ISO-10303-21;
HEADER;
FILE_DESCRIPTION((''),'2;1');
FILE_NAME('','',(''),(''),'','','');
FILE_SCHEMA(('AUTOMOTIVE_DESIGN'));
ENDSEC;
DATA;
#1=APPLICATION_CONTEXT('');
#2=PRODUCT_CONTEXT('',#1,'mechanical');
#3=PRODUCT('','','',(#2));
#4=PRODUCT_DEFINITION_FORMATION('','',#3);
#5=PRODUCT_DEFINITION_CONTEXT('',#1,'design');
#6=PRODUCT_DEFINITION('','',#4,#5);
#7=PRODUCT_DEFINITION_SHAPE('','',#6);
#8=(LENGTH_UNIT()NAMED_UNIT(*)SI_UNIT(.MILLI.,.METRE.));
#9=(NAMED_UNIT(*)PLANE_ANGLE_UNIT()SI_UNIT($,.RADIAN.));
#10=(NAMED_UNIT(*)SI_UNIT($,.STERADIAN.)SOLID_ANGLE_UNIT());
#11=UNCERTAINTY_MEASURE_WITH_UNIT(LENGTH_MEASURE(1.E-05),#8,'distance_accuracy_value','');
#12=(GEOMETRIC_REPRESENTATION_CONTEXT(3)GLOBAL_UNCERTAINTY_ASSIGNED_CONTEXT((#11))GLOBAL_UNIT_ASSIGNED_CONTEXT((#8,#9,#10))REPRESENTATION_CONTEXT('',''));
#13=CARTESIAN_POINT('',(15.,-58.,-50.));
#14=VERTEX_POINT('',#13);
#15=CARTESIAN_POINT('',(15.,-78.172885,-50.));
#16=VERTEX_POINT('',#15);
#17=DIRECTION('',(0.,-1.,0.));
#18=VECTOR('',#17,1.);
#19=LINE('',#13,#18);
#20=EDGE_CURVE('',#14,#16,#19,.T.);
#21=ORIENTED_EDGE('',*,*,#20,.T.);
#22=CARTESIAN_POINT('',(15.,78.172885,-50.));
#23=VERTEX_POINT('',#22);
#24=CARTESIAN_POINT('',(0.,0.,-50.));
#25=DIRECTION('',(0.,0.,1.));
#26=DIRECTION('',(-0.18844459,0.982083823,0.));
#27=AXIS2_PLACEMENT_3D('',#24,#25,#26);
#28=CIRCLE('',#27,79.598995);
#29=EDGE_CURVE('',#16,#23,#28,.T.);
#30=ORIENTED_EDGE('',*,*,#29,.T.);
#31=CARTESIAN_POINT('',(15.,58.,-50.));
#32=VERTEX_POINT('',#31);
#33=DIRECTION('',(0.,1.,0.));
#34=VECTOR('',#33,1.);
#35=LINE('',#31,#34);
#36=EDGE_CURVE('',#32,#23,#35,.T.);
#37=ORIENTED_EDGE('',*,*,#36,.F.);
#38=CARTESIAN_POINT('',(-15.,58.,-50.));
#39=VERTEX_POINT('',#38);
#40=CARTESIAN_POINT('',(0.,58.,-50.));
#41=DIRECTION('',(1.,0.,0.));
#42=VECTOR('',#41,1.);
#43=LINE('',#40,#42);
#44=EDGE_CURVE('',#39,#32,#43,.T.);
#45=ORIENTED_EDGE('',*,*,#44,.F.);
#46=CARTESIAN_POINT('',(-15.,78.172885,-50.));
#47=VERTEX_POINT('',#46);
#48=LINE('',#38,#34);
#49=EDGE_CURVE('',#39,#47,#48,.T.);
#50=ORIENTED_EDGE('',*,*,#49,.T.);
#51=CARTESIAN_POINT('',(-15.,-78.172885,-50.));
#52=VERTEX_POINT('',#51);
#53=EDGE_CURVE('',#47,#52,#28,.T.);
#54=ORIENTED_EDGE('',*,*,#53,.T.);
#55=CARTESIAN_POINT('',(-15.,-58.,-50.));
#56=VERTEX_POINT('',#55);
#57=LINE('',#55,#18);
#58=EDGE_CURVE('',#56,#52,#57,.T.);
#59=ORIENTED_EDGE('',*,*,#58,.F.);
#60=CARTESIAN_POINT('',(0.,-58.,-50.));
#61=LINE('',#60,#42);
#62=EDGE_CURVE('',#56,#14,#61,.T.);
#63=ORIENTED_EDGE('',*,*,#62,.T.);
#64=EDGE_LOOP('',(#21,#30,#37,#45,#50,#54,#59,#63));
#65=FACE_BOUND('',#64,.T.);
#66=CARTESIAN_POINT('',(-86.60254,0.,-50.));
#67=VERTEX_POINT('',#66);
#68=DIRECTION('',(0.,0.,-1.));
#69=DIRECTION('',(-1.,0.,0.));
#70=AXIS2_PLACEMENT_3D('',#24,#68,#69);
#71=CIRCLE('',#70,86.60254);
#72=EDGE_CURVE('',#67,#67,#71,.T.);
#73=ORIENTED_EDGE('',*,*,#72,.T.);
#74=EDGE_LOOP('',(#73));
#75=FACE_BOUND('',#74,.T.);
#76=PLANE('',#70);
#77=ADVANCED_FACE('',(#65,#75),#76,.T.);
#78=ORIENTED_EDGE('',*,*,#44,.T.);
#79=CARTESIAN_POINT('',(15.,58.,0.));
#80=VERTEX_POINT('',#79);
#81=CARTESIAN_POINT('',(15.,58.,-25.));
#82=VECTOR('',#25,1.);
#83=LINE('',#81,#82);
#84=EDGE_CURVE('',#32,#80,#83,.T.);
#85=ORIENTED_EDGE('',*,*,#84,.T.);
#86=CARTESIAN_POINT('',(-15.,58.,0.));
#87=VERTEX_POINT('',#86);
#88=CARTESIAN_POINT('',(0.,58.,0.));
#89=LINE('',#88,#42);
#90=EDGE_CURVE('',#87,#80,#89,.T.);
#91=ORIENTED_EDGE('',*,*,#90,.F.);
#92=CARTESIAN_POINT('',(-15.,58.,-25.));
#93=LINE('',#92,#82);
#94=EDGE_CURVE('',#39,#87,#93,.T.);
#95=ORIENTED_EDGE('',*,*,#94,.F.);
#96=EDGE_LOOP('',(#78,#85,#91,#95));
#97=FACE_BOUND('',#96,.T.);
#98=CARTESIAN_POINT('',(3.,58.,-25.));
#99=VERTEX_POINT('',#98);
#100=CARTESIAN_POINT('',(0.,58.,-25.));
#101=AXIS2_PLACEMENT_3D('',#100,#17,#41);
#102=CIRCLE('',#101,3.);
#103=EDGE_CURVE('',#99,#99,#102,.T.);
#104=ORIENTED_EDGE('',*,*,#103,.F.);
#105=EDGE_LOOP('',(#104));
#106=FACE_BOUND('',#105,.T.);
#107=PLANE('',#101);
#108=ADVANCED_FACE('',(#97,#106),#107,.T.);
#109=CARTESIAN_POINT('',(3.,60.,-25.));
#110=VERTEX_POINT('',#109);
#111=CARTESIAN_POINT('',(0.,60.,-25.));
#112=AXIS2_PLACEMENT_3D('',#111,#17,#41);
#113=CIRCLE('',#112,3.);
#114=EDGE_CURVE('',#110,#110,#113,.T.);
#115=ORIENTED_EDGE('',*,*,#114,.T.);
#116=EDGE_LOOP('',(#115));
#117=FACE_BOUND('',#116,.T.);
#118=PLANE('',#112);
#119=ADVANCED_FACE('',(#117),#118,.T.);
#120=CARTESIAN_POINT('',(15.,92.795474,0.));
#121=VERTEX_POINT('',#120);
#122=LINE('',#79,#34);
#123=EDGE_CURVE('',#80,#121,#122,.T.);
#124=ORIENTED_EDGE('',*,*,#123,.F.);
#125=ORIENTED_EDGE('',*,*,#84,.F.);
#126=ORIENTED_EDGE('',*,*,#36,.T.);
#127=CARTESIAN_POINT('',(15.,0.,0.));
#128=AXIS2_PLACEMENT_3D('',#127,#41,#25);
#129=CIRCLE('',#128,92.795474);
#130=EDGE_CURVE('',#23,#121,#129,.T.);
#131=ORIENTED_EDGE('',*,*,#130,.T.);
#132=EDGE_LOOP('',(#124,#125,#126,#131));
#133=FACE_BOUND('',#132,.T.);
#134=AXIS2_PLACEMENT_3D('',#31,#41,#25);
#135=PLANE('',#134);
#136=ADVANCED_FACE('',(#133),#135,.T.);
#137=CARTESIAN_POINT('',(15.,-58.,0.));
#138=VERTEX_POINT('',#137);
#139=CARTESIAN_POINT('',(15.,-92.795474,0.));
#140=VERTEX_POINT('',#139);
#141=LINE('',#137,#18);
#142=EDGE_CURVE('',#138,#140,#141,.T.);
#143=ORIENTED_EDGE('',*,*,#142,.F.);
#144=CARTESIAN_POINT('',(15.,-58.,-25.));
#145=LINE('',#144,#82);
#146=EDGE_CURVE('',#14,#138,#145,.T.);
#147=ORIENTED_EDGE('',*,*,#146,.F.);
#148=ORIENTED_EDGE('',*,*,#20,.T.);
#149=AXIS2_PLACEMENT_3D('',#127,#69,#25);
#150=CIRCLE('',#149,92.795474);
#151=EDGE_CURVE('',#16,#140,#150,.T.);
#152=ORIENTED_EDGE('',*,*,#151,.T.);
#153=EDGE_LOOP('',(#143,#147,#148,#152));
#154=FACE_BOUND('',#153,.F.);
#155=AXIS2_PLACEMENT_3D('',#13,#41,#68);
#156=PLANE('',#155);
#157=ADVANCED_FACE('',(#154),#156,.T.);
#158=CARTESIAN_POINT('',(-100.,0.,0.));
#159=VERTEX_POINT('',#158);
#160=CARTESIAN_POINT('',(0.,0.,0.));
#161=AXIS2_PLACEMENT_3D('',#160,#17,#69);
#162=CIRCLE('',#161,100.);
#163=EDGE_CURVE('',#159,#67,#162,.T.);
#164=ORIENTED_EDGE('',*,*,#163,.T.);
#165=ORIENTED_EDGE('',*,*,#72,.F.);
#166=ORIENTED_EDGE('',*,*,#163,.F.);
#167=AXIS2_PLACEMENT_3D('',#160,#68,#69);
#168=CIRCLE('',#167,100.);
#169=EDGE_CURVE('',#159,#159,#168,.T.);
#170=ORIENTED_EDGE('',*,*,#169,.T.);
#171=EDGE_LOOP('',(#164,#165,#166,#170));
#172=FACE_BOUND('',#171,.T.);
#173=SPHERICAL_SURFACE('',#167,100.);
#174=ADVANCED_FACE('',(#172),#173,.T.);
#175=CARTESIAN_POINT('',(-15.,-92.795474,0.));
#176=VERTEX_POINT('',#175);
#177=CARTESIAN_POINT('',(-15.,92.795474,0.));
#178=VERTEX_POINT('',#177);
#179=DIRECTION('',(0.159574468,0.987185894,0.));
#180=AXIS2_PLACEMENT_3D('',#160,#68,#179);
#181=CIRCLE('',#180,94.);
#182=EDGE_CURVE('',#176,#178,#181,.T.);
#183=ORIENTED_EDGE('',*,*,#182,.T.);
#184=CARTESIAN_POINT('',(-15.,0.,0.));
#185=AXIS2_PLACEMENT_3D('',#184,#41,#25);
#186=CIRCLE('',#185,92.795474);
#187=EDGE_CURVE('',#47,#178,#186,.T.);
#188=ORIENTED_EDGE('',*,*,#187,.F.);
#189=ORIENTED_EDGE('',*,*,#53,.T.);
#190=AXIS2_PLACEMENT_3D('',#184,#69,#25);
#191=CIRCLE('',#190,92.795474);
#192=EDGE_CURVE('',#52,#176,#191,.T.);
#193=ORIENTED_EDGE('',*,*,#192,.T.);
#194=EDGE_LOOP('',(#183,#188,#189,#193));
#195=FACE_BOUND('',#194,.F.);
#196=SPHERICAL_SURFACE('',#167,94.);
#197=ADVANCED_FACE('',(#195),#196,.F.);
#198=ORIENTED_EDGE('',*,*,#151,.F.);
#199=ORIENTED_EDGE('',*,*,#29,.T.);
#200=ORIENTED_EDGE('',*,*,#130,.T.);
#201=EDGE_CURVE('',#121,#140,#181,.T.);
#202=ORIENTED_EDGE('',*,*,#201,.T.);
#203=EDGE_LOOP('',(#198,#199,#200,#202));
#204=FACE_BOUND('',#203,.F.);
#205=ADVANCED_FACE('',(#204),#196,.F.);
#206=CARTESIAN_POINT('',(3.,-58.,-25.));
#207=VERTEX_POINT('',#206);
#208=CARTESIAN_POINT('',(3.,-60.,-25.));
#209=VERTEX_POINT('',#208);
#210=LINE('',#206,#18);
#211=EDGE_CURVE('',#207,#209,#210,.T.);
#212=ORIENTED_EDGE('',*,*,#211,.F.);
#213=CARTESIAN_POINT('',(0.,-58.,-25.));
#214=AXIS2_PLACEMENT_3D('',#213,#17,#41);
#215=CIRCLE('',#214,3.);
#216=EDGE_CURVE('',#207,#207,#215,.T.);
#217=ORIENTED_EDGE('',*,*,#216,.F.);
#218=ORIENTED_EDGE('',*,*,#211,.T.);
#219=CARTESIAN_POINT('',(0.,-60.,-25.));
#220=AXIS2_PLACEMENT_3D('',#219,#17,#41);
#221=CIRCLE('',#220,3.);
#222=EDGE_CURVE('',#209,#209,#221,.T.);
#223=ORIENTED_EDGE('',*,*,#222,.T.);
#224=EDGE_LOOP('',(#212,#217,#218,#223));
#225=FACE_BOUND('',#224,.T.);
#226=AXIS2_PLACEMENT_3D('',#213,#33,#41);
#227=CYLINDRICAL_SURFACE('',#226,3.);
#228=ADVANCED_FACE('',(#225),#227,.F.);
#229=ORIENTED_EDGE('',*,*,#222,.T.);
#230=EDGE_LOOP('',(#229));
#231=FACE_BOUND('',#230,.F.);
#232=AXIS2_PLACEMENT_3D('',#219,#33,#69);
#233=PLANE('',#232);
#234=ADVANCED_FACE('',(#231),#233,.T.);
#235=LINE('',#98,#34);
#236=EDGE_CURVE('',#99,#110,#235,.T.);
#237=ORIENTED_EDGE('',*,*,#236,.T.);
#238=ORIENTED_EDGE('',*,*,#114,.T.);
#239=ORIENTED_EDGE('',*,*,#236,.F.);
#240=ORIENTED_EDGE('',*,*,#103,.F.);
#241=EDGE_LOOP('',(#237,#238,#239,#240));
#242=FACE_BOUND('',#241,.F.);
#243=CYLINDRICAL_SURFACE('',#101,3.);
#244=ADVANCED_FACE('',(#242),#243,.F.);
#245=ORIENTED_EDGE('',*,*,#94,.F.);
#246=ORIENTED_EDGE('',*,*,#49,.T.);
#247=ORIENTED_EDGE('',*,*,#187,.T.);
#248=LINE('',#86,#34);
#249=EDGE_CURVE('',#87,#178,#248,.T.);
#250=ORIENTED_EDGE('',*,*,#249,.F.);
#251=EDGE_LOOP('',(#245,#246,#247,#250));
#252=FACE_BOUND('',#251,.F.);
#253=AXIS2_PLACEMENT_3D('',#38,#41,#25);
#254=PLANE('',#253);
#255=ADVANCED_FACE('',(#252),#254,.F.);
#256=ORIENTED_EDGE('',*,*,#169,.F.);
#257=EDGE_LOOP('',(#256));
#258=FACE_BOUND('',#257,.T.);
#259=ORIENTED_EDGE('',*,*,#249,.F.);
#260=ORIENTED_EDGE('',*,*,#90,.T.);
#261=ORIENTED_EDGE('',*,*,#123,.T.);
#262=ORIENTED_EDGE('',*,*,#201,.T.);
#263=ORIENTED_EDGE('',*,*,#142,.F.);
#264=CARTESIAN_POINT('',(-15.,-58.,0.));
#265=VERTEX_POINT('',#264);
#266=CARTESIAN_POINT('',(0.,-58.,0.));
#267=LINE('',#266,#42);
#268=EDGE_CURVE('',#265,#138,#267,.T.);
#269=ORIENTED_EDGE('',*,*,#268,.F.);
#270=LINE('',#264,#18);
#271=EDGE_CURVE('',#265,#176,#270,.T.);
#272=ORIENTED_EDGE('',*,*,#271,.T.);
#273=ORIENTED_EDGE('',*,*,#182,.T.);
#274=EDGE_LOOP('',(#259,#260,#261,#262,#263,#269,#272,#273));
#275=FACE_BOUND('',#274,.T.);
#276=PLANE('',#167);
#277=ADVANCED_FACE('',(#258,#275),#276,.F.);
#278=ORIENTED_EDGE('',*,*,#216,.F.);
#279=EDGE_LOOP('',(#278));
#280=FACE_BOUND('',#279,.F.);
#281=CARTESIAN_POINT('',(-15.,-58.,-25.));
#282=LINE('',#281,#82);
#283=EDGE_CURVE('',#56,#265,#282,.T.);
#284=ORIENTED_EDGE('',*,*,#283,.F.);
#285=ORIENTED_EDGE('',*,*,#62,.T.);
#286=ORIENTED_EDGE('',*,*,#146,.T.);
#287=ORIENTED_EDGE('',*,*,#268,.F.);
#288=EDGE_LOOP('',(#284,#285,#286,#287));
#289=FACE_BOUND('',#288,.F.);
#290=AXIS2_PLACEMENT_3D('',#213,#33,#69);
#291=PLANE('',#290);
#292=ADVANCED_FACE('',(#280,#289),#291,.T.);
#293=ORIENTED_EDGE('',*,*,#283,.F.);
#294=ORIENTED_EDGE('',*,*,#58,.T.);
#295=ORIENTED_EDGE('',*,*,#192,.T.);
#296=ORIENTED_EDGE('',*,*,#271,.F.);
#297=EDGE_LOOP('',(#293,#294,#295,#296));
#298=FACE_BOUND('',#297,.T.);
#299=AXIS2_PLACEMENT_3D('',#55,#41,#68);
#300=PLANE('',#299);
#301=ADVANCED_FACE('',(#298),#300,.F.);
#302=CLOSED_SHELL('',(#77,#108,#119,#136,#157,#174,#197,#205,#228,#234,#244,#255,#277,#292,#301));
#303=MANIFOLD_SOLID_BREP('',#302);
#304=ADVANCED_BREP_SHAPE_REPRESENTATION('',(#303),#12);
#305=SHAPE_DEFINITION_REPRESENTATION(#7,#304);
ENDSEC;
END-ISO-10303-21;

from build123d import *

# Parameters (mm, degrees)
F2_T     = -6
F4_W     = 30
F4_H     = 50
F6_R     = 3
F7_DEPTH = 2


# Not quite as in the source:
# - a pattern or mirror of a feature is missing from the dataset's text; its kind, count and spacing are read off the source's solid


with BuildPart() as f1:
    # F0 (on Front) → F1 (revolve)
    with BuildSketch(Plane.XZ):
        with BuildLine():
            Line((0, 0), (-100, 0))
            ThreePointArc((-100, 0), (-96.5925826289, -25.8819045103), (-86.6025403784, -50))
            Line((-86.6025403784, -50), (0, -50))
            Line((0, -50), (0, 0))
        make_face()
    revolve(axis=Axis((0, 0, -25), (0, 0, -1)))

    # F2
    f2_openings = [f1.faces().sort_by_distance(p)[0] for p in [
        (0, 0, 0),
        (0, 0, -50),
    ]]
    offset(amount=F2_T, openings=f2_openings)

    # F4 (on offset) → F5 (join, up to the next surface of F1)
    with BuildSketch(Plane.XZ.offset(-58)):
        with Locations((0, -25)):
            Rectangle(F4_W, F4_H)
    f5 = extrude(until=Until.NEXT, dir=(0, 1, 0))

    # F5_copies: F5 across plane
    add(f5.mirror(Plane(origin=(0, 0, 0), x_dir=(0, 0, -1), z_dir=(0, -1, 0))))

    # F6 (on face) → F7 (cut)
    with BuildSketch(Plane.XZ.offset(-58)):
        with Locations((0, -25)):
            Circle(F6_R)
    f7 = extrude(amount=-F7_DEPTH, mode=Mode.SUBTRACT)

    # F7_copies: F7 across plane
    add(f7.mirror(Plane(origin=(0, 0, 0), x_dir=(0, 0, -1), z_dir=(0, -1, 0))), mode=Mode.SUBTRACT)


solid = f1.part
